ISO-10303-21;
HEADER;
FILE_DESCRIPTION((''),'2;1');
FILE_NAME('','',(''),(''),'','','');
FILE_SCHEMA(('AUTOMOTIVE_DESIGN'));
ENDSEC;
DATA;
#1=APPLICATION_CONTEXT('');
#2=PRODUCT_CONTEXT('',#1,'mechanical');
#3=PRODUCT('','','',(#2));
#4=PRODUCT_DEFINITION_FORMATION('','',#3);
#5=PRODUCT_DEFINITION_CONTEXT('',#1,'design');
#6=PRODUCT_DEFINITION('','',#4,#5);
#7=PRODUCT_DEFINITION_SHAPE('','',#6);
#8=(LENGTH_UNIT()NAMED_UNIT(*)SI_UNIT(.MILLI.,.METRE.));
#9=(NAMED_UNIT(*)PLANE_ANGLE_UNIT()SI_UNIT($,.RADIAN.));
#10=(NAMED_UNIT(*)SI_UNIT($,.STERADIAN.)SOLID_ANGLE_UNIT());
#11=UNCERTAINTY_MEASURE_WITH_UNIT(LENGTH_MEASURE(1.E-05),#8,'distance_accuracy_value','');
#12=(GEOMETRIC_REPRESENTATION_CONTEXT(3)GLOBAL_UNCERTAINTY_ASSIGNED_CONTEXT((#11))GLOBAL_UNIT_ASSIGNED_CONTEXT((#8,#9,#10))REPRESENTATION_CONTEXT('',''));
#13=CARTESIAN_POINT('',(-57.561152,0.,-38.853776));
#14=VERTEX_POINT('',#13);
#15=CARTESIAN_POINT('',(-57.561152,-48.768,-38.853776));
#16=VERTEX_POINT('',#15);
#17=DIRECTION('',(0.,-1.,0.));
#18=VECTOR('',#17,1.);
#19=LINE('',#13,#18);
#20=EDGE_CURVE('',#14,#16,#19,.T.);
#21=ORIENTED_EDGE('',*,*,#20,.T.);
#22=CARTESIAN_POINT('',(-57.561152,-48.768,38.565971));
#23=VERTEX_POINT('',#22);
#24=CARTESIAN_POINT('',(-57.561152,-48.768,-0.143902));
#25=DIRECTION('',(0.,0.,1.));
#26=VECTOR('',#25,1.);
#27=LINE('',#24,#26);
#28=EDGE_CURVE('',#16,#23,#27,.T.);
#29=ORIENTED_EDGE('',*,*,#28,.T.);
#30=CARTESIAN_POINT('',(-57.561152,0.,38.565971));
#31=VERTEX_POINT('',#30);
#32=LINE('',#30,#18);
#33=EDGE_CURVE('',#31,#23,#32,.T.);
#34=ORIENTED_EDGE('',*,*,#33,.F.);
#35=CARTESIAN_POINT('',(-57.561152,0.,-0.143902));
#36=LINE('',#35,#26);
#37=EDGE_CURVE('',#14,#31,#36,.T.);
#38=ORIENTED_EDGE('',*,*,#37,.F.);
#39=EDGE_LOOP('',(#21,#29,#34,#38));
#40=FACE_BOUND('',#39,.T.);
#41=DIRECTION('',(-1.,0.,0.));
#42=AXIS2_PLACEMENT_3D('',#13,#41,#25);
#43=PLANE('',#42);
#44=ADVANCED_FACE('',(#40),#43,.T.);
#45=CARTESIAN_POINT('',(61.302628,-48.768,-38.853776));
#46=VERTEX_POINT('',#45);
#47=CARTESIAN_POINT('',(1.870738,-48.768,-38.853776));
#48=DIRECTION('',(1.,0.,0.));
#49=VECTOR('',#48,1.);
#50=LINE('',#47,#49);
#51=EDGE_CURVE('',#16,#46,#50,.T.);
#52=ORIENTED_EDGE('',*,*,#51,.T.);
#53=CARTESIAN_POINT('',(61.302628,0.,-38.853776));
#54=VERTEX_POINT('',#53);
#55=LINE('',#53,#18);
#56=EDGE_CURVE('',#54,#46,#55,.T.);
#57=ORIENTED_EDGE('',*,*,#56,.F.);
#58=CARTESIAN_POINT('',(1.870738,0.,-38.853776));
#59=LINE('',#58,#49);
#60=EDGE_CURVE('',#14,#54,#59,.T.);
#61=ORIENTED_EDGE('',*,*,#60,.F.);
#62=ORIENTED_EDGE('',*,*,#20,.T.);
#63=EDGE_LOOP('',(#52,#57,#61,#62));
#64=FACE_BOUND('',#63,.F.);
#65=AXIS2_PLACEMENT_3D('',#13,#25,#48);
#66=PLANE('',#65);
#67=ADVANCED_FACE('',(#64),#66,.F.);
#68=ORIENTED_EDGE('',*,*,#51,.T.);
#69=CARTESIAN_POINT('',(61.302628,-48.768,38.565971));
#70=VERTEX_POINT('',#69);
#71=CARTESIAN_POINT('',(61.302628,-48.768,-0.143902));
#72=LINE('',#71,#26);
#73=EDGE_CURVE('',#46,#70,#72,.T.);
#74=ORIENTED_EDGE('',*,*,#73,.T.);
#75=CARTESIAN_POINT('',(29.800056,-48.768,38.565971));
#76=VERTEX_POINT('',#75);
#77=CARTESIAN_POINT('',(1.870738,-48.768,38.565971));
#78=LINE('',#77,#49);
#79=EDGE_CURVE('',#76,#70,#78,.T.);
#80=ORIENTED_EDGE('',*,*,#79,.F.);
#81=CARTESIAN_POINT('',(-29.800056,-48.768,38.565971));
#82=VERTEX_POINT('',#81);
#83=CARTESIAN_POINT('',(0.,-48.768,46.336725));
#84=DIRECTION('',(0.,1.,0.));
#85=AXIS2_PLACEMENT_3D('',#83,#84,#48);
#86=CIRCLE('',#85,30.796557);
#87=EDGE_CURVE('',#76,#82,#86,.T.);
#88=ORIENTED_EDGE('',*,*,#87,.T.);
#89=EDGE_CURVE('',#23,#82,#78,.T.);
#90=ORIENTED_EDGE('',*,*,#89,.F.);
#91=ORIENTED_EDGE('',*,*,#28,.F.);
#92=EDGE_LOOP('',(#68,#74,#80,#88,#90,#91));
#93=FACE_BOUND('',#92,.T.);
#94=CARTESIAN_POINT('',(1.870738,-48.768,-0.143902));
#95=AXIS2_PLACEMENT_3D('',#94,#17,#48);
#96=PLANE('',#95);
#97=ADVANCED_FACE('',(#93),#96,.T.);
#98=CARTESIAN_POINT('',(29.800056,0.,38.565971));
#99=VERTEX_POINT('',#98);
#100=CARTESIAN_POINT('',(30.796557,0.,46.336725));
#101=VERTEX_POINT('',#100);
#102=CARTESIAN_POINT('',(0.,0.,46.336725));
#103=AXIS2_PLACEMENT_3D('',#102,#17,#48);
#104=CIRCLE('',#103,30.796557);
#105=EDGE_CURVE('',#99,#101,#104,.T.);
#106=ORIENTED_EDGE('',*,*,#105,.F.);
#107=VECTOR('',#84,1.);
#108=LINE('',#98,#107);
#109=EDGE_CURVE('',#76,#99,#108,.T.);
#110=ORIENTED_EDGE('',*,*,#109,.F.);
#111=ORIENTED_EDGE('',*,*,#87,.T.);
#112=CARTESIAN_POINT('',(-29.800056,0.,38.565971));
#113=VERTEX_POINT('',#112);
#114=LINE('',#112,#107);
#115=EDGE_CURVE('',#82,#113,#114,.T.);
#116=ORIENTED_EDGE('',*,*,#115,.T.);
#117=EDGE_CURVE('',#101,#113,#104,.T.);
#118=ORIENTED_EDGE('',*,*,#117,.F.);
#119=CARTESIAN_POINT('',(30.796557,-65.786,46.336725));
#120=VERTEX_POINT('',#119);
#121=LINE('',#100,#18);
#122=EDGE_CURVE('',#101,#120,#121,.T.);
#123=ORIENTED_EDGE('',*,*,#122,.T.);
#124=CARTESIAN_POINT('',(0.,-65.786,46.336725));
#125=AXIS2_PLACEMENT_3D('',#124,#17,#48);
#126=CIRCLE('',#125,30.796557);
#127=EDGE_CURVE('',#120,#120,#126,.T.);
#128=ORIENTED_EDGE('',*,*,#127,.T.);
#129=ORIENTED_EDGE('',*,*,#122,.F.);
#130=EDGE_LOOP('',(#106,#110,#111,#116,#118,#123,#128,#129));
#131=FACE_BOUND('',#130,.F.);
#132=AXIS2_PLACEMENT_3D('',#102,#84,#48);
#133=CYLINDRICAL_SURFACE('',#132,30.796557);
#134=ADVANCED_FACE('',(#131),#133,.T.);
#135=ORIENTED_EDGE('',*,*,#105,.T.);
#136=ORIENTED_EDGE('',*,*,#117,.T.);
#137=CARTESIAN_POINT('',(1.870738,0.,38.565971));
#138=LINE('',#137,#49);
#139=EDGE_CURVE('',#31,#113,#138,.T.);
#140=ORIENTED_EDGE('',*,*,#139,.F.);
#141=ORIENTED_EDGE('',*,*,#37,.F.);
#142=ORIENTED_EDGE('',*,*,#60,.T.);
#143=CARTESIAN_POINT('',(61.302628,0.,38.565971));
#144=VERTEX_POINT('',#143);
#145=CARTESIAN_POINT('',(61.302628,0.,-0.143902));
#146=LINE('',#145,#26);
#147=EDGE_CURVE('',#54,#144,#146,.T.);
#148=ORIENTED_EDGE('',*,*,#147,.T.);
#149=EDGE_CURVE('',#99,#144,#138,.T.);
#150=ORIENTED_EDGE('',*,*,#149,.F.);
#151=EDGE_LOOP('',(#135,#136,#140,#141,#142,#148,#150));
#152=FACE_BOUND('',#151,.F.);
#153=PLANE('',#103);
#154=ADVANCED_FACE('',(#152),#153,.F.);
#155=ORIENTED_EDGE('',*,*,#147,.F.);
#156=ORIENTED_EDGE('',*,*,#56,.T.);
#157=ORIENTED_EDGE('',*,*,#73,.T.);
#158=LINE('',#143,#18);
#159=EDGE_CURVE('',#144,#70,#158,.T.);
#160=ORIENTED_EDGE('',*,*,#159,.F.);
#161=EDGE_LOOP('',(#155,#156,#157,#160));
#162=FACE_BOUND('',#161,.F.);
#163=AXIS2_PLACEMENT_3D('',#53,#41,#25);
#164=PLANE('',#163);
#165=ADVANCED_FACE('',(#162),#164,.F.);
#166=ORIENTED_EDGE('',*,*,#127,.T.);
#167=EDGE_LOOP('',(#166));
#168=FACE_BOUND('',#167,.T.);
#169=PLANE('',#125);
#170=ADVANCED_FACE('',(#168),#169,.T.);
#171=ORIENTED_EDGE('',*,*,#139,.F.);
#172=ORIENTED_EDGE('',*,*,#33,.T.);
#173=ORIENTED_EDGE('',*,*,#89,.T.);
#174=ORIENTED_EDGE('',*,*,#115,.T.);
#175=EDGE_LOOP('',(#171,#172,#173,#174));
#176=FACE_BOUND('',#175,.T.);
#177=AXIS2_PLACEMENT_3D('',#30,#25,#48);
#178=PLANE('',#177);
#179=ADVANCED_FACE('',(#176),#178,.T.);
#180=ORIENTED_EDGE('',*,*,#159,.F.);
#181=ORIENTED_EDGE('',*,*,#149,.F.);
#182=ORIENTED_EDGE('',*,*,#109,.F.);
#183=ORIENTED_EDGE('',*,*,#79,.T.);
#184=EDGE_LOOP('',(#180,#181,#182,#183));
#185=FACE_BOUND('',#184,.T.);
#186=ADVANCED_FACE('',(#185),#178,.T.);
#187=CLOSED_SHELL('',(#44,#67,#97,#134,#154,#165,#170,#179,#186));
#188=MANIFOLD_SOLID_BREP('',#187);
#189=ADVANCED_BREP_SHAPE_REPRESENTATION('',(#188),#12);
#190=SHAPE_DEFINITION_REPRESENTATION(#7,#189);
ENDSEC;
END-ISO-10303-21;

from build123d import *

# Parameters (mm, degrees)
F0_W     = 118.8637800515
F0_H     = 77.4197466671
F1_DEPTH = 48.768
F4_R     = 30.7965572654
F5_DEPTH = 65.786


# Not quite as in the source:
# - the program builds the solid bodies; features that only make, move or delete a surface that nothing else refers to are left out


with BuildPart() as f1:
    # F0 (on Front) → F1 (new body)
    with BuildSketch(Plane.XZ):
        with Locations((1.8707383424, -0.1439023763)):
            Rectangle(F0_W, F0_H)
    extrude(amount=F1_DEPTH)

    # F4 (on Front) → F5 (join)
    with BuildSketch(Plane.XZ):
        with Locations((0, 46.3367253542)):
            Circle(F4_R)
    extrude(amount=F5_DEPTH)


solid = f1.part
